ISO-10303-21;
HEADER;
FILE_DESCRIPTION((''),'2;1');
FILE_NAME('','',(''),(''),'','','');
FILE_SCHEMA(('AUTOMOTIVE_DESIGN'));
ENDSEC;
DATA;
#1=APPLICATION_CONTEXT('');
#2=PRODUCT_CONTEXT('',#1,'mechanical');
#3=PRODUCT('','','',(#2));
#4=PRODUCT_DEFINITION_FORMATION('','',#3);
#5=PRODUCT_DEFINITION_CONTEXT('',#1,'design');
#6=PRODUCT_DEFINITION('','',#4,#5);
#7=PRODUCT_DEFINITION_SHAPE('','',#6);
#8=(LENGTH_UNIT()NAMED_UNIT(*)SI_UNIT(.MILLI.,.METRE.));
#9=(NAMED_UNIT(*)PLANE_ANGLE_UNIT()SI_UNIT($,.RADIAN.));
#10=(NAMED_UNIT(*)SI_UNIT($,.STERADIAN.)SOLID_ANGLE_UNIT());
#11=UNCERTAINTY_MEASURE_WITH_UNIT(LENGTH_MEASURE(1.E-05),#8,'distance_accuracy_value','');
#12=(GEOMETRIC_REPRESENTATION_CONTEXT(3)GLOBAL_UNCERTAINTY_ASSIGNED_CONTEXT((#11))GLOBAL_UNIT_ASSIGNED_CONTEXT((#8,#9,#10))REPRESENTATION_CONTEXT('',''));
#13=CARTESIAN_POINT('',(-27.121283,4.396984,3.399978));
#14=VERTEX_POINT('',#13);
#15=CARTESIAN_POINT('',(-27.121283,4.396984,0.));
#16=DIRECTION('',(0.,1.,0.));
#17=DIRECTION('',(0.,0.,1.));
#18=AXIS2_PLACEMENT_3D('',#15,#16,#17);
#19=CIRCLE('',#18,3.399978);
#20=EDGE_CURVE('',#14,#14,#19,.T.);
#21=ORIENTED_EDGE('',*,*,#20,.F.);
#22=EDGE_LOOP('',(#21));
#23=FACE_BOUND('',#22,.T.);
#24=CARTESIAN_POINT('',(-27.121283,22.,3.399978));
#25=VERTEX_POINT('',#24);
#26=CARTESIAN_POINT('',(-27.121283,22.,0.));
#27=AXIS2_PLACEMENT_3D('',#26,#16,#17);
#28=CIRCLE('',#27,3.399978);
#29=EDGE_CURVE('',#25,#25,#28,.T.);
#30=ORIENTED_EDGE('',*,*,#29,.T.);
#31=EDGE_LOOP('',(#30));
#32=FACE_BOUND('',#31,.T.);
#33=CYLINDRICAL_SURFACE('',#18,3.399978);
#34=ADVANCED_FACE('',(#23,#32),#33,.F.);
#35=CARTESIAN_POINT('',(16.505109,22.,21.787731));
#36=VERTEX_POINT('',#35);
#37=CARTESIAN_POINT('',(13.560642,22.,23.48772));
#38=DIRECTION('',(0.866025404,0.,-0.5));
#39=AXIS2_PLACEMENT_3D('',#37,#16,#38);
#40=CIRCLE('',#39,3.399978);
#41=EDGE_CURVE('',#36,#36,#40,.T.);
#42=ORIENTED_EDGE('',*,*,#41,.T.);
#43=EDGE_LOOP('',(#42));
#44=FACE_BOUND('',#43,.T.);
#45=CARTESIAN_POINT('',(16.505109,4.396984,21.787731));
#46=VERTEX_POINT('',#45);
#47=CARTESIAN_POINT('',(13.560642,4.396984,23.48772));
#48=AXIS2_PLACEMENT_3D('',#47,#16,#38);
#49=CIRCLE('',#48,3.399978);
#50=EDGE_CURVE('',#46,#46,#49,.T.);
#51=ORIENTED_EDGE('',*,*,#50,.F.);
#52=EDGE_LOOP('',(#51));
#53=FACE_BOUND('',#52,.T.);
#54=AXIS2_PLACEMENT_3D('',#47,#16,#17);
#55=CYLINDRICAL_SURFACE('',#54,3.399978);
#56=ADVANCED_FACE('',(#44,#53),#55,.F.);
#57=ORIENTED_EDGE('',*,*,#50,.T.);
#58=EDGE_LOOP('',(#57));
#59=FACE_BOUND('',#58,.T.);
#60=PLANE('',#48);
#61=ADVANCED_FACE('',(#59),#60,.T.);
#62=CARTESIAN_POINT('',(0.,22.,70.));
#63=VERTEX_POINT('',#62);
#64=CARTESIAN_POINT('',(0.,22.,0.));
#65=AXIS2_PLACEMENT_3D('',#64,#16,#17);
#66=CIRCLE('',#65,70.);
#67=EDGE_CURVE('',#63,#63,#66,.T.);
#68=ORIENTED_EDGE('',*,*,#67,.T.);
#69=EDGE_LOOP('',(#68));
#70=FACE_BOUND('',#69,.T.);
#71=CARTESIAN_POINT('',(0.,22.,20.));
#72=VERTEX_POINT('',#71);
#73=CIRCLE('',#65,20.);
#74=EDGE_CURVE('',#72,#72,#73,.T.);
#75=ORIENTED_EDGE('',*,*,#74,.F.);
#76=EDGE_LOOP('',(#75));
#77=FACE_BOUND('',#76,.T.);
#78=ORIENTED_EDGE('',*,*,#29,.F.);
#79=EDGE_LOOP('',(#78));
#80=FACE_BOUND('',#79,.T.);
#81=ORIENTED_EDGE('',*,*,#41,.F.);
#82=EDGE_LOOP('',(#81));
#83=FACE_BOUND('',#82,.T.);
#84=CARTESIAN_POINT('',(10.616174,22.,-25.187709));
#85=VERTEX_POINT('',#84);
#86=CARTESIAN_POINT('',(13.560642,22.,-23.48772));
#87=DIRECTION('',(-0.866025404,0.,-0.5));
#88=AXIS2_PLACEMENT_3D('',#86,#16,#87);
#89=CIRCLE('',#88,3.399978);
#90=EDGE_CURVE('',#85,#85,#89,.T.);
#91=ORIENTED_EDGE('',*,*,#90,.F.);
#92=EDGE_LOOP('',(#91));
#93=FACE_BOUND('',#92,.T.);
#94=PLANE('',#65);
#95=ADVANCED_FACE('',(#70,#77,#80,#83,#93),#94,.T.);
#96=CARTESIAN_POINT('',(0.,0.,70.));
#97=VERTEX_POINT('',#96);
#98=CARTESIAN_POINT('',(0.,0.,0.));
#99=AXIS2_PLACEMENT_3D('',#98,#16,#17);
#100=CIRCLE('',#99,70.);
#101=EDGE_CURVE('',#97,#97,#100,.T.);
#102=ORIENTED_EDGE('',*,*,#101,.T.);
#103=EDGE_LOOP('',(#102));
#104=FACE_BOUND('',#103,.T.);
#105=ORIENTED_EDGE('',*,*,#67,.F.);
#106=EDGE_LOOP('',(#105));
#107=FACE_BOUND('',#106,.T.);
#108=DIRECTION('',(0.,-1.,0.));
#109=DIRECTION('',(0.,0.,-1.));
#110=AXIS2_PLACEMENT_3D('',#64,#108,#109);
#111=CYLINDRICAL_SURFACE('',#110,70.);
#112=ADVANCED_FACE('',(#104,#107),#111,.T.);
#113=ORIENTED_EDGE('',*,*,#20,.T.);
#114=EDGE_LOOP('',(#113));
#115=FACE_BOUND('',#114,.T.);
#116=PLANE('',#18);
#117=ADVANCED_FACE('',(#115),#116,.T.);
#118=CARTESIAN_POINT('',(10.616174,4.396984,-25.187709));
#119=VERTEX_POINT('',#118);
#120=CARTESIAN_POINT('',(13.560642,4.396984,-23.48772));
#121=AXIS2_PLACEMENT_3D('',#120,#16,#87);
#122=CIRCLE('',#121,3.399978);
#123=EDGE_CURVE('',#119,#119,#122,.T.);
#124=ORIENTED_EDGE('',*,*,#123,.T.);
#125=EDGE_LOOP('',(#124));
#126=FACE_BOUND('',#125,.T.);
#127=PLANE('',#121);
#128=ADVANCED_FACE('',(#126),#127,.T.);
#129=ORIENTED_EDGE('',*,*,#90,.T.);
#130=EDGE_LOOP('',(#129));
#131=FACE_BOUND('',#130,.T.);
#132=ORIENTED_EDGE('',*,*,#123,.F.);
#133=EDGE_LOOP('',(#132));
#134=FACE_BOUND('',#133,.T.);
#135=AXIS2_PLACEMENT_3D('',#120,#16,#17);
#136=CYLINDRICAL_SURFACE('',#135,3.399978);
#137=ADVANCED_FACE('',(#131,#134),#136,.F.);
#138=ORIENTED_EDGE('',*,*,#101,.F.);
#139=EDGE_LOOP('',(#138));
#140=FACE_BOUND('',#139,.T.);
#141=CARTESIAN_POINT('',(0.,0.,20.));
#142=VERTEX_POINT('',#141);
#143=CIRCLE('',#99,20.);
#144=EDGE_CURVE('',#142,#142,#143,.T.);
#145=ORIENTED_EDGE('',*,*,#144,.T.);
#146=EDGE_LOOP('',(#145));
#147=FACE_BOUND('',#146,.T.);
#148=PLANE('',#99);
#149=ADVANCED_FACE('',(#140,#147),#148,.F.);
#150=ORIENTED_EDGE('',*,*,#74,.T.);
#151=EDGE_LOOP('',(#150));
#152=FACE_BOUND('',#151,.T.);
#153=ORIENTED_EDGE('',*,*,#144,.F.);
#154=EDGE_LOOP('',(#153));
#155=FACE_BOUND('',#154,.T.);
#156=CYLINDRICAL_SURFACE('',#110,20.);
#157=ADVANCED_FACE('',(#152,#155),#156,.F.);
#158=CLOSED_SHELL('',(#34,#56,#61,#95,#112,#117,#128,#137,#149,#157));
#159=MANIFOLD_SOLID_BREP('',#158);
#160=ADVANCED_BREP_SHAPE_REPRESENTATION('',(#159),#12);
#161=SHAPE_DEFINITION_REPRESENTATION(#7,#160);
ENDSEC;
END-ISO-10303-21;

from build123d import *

# Parameters (mm, degrees)
SKETCH1_R           = 70
BOSS_EXTRUDE1_DEPTH = 22
SKETCH2_R           = 20
CUT_EXTRUDE1_DEPTH  = 102.410058673
SKETCH3_R           = 3.39997832
CUT_EXTRUDE2_DEPTH  = 17.603015952
CIRPATTERN1_COUNT   = 3


with BuildPart() as part:
    # Sketch1 → Boss-Extrude1 (new body)
    with BuildSketch(Plane(origin=(0, 0, 0), x_dir=(1, 0, 0), z_dir=(0, 1, 0))):
        Circle(SKETCH1_R)
    extrude(amount=BOSS_EXTRUDE1_DEPTH)

    # Sketch2 → Cut-Extrude1 (cut, through all)
    with BuildSketch(Plane(origin=(0, 0, 0), x_dir=(1, 0, 0), z_dir=(0, 1, 0))):
        Circle(SKETCH2_R)
    extrude(amount=CUT_EXTRUDE1_DEPTH, mode=Mode.SUBTRACT)

    # Sketch3 → Cut-Extrude2 (cut)
    with BuildSketch(Plane(origin=(0, 22, 0), x_dir=(1, 0, 0), z_dir=(0, 1, 0))):
        with Locations((-27.121283171, 0)):
            Circle(SKETCH3_R)
    cut_extrude2 = extrude(amount=-CUT_EXTRUDE2_DEPTH, mode=Mode.SUBTRACT)

    # CirPattern1: Cut-Extrude2 ×3 about axis
    cirpattern1_axis = Axis((0, 0, 0), (0, 1, 0))
    for i in range(1, CIRPATTERN1_COUNT):
        add(cut_extrude2.rotate(cirpattern1_axis, i * 360 / CIRPATTERN1_COUNT), mode=Mode.SUBTRACT)


solid = part.part
